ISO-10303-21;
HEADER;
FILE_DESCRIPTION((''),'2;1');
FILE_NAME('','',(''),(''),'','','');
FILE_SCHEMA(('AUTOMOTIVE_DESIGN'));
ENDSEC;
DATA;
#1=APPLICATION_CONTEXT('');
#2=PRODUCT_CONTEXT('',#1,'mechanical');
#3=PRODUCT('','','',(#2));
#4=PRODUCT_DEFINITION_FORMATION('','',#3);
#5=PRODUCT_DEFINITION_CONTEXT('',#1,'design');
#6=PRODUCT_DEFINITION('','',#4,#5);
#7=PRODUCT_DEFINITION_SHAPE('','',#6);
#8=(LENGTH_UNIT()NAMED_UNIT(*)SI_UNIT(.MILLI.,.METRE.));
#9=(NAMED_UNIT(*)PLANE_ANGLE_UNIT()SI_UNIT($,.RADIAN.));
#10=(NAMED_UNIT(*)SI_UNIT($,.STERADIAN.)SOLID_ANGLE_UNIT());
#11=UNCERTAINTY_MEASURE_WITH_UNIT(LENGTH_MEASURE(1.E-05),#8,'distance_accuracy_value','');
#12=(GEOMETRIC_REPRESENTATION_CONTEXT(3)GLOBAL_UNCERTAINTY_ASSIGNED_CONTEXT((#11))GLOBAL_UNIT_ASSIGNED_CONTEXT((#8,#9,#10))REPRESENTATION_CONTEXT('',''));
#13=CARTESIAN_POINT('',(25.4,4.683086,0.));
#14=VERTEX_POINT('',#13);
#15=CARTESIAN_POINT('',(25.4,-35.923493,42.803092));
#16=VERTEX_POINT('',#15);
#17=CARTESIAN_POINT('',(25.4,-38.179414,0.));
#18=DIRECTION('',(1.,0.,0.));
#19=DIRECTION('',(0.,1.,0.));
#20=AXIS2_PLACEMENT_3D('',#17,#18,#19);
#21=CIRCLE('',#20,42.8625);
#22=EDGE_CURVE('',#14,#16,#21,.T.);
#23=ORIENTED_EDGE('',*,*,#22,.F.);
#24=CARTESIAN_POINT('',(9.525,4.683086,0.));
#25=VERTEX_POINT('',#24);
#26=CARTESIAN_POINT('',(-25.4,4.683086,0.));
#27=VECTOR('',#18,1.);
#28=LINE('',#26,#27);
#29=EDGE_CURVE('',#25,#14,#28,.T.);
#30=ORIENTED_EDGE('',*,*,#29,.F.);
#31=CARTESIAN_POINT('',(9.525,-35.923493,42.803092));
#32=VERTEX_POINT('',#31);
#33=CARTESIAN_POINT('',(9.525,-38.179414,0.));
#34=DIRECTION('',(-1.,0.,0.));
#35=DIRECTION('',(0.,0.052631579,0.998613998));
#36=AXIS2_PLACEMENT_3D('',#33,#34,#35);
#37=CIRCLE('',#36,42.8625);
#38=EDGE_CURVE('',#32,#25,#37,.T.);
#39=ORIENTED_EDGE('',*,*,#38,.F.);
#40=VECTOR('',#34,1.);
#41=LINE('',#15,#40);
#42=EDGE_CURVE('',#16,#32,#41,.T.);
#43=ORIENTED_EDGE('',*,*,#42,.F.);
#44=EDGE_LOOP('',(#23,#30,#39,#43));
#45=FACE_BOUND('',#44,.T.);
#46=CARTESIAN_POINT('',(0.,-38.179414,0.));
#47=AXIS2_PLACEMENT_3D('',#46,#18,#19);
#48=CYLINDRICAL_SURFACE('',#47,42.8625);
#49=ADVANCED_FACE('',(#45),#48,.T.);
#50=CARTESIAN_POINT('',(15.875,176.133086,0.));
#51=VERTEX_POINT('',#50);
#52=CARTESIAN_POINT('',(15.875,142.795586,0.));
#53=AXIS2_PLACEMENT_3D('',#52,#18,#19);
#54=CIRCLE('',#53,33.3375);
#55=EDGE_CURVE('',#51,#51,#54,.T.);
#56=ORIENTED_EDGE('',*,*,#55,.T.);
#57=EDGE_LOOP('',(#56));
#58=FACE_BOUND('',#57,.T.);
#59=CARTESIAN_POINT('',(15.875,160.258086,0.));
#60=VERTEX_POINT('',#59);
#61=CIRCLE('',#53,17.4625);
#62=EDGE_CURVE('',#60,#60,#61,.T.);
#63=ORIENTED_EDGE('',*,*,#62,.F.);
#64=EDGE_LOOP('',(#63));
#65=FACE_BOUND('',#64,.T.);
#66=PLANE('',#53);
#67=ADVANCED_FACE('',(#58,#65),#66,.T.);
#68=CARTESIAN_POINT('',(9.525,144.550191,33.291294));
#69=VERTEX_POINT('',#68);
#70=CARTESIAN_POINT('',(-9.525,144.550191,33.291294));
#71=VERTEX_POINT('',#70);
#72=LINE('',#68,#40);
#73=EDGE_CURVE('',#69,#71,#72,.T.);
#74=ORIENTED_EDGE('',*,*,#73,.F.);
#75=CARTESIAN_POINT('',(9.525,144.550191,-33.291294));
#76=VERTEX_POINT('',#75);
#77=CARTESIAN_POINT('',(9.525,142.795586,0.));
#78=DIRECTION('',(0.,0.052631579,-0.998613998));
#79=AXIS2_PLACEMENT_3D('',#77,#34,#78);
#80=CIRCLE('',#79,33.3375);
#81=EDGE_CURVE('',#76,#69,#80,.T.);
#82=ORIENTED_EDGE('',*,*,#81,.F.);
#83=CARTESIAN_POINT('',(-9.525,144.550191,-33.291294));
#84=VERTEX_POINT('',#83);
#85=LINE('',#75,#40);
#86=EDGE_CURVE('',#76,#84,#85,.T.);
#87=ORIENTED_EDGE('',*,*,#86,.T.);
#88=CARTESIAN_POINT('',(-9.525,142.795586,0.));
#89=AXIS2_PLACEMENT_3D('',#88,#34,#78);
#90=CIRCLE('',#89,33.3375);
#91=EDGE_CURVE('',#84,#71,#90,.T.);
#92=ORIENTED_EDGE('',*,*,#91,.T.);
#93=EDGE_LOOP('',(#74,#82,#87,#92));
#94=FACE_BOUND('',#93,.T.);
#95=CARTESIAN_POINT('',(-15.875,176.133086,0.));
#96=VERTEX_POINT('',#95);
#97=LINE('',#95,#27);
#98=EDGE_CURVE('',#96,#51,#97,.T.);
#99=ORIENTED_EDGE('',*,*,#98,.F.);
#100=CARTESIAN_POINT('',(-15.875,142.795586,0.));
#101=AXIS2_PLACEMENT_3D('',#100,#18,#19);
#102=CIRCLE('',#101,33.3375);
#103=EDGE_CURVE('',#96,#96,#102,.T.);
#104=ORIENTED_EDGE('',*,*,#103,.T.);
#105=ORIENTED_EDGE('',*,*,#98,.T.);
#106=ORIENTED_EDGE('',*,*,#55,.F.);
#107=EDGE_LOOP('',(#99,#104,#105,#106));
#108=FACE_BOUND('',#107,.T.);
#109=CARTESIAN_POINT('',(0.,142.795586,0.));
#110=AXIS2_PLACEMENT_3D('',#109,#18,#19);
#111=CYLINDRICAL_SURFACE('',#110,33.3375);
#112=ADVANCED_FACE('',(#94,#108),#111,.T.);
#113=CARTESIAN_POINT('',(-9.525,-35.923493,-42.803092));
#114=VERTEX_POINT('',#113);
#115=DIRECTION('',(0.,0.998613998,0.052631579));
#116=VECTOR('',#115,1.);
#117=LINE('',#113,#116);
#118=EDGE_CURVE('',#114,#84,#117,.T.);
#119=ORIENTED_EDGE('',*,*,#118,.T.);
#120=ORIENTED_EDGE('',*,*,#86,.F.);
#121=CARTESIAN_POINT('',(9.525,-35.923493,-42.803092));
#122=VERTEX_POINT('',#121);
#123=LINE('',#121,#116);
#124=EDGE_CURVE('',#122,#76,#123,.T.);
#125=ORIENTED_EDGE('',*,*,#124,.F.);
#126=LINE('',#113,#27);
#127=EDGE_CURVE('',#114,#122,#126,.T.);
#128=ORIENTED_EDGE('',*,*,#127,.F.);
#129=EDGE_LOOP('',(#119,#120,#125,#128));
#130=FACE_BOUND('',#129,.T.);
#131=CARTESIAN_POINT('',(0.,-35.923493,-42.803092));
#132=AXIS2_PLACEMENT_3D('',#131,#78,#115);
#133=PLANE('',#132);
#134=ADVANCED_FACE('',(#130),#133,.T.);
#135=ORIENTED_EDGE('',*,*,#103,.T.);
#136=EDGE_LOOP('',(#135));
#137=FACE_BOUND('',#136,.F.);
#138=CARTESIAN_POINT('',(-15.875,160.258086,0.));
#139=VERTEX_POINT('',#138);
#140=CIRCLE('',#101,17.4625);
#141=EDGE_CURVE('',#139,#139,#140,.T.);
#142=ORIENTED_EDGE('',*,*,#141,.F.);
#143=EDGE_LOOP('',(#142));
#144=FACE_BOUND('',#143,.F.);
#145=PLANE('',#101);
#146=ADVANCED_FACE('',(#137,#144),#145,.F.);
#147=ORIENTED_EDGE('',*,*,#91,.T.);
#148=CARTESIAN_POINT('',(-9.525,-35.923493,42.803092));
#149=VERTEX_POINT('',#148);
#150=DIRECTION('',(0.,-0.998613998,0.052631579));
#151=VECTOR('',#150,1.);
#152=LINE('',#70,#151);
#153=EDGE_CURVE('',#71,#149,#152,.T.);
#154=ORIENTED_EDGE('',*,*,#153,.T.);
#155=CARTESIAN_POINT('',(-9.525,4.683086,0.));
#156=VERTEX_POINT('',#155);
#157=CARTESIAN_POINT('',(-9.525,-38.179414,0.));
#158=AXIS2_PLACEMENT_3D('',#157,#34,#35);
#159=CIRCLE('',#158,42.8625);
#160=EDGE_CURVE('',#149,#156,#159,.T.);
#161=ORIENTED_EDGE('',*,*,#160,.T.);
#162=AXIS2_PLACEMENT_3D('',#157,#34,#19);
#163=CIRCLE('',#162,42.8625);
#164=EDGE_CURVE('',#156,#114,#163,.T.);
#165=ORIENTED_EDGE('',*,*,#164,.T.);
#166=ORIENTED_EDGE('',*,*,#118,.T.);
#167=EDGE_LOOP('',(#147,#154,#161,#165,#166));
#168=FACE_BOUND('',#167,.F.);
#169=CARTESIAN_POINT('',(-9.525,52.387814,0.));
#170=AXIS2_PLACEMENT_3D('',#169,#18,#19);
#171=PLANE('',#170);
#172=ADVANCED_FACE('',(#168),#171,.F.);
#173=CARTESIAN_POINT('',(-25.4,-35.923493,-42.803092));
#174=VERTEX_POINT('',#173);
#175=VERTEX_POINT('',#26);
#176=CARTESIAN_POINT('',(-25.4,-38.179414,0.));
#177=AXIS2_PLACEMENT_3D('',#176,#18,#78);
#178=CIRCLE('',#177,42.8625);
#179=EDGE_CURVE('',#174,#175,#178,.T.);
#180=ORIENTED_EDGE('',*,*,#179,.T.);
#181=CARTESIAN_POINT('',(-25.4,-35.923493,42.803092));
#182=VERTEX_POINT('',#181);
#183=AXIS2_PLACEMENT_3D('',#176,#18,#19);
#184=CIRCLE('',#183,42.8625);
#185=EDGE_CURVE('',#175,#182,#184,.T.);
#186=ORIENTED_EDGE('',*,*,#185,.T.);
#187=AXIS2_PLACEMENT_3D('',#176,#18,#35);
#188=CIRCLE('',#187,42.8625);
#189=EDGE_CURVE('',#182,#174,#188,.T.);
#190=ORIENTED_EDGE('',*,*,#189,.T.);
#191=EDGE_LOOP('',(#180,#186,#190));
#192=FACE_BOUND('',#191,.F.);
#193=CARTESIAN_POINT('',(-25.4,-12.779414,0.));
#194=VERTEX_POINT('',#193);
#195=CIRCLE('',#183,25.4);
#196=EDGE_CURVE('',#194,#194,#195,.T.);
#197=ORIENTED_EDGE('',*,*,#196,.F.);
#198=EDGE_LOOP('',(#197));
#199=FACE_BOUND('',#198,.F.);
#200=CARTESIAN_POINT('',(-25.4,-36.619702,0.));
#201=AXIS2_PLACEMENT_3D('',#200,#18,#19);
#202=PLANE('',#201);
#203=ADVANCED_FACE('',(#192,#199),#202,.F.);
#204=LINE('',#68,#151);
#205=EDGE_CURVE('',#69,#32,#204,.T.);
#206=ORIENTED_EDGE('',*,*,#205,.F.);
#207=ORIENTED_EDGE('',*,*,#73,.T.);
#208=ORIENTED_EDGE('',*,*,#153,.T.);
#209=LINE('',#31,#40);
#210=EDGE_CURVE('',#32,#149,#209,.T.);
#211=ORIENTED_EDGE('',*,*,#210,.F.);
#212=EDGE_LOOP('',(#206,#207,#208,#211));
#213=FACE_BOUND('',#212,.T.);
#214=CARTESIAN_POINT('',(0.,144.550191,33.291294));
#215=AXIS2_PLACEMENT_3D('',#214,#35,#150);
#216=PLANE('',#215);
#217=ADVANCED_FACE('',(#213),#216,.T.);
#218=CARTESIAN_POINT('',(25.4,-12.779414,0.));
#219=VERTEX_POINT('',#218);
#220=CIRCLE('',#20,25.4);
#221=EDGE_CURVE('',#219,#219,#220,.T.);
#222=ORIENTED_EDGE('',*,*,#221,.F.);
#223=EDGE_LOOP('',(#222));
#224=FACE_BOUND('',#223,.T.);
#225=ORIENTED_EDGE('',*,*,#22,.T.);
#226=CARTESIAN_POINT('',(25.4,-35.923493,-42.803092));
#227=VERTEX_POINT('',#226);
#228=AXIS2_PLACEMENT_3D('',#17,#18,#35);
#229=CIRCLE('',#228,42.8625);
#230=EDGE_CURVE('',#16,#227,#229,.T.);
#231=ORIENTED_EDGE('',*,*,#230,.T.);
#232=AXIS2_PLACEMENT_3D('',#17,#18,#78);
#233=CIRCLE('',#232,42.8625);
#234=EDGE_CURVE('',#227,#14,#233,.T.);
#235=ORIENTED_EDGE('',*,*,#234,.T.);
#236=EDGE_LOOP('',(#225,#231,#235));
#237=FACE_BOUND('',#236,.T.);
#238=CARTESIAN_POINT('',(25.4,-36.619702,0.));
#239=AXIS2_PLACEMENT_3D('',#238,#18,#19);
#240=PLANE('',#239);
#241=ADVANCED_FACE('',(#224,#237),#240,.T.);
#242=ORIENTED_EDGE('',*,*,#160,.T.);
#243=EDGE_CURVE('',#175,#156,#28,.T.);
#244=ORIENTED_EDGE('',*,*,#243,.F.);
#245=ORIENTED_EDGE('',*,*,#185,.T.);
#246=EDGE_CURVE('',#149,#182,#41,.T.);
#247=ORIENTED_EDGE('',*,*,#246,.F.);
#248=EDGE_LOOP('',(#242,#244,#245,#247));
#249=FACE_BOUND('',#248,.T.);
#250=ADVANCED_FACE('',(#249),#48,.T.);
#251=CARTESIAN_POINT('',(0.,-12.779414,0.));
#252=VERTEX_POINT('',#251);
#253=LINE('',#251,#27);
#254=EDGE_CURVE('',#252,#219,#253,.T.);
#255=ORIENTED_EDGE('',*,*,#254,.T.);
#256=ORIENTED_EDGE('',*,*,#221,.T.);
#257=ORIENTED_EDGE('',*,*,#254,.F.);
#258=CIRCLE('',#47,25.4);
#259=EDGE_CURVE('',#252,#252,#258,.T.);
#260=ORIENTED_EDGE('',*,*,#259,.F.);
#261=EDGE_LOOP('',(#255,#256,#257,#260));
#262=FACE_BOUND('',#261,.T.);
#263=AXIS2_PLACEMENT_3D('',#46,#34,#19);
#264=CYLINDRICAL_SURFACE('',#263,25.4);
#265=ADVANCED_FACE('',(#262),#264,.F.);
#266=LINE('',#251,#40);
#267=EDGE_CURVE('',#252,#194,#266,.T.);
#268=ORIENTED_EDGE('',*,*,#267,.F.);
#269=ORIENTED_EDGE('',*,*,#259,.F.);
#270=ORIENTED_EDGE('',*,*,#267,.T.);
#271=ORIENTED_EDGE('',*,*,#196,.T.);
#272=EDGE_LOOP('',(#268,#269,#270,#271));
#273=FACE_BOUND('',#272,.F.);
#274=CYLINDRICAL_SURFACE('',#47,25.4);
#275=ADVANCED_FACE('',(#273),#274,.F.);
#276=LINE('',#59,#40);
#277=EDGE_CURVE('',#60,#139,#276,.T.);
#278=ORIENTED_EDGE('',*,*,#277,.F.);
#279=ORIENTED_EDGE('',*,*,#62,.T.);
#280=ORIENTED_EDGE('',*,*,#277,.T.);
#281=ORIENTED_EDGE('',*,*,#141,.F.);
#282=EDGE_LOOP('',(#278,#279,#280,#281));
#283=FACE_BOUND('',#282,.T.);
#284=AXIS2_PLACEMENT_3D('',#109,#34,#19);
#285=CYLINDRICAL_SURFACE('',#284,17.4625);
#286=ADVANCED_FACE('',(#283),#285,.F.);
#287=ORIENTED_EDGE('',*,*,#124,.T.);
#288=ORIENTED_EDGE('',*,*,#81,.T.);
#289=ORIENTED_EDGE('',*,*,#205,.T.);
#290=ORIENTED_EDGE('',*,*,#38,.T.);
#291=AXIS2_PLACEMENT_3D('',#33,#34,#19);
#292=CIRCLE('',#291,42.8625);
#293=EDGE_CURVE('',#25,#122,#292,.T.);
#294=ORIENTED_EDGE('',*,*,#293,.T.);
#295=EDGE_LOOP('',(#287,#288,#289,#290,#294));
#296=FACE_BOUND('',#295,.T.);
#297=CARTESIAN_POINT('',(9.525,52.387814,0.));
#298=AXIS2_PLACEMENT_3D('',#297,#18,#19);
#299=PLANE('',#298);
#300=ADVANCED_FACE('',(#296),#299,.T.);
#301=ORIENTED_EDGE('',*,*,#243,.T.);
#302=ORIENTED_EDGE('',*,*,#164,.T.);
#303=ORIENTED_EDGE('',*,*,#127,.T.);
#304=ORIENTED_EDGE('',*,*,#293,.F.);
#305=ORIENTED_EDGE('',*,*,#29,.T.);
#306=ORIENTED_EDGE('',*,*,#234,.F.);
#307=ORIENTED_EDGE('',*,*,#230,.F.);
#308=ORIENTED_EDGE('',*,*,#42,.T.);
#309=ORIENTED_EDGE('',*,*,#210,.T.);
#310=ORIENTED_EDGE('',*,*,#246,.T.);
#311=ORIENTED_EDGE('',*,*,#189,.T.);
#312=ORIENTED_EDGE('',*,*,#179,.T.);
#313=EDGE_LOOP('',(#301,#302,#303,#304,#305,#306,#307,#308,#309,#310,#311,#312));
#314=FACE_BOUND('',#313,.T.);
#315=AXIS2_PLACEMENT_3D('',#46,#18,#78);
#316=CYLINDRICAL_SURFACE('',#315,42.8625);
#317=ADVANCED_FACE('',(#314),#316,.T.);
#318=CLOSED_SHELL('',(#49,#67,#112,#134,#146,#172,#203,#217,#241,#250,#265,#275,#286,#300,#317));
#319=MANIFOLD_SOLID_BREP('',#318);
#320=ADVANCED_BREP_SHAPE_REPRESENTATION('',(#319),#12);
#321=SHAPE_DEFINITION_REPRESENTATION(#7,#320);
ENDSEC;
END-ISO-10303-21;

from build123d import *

# Parameters (mm, degrees)
F1_DEPTH = 9.525
F0_R     = 25.4
F2_DEPTH = 25.4
F0_R_2   = 17.4625
F3_DEPTH = 15.875


with BuildPart() as f1:
    # F0 (on Right) → F1 (new body, symmetric)
    with BuildSketch(Plane.YZ):
        with BuildLine():
            ThreePointArc((-35.9234930565, 42.803092487), (-7.0836883387, 29.4999956791), (4.6830858909, 0))
            ThreePointArc((4.6830858909, 0), (-7.0836883387, -29.4999956791), (-35.9234930565, -42.803092487))
            Line((-35.9234930565, -42.803092487), (144.5501911541, -33.2912941566))
            ThreePointArc((144.5501911541, -33.2912941566), (109.4580858909, 0), (144.5501911541, 33.2912941566))
            Line((144.5501911541, 33.2912941566), (-35.9234930565, 42.803092487))
        make_face()
    extrude(amount=F1_DEPTH, both=True)

    # F0 (on Right) → F2 (join, symmetric)
    with BuildSketch(Plane.YZ):
        with BuildLine():
            ThreePointArc((-35.9234930565, -42.803092487), (-7.0836883387, -29.4999956791), (4.6830858909, 0))
            ThreePointArc((4.6830858909, 0), (-7.0836883387, 29.4999956791), (-35.9234930565, 42.803092487))
            ThreePointArc((-35.9234930565, 42.803092487), (-81.0419141091, 0), (-35.9234930565, -42.803092487))
        make_face()
        with Locations((-38.1794141091, 0)):
            Circle(F0_R, mode=Mode.SUBTRACT)
    extrude(amount=F2_DEPTH, both=True)

    # F0 (on Right) → F3 (join, symmetric)
    with BuildSketch(Plane.YZ):
        with BuildLine():
            ThreePointArc((176.1330858909, 0), (166.981150379, 22.9444410837), (144.5501911541, 33.2912941566))
            ThreePointArc((144.5501911541, 33.2912941566), (109.4580858909, 0), (144.5501911541, -33.2912941566))
            ThreePointArc((144.5501911541, -33.2912941566), (166.981150379, -22.9444410837), (176.1330858909, 0))
        make_face()
        with Locations((142.7955858909, 0)):
            Circle(F0_R_2, mode=Mode.SUBTRACT)
    extrude(amount=F3_DEPTH, both=True)


solid = f1.part
